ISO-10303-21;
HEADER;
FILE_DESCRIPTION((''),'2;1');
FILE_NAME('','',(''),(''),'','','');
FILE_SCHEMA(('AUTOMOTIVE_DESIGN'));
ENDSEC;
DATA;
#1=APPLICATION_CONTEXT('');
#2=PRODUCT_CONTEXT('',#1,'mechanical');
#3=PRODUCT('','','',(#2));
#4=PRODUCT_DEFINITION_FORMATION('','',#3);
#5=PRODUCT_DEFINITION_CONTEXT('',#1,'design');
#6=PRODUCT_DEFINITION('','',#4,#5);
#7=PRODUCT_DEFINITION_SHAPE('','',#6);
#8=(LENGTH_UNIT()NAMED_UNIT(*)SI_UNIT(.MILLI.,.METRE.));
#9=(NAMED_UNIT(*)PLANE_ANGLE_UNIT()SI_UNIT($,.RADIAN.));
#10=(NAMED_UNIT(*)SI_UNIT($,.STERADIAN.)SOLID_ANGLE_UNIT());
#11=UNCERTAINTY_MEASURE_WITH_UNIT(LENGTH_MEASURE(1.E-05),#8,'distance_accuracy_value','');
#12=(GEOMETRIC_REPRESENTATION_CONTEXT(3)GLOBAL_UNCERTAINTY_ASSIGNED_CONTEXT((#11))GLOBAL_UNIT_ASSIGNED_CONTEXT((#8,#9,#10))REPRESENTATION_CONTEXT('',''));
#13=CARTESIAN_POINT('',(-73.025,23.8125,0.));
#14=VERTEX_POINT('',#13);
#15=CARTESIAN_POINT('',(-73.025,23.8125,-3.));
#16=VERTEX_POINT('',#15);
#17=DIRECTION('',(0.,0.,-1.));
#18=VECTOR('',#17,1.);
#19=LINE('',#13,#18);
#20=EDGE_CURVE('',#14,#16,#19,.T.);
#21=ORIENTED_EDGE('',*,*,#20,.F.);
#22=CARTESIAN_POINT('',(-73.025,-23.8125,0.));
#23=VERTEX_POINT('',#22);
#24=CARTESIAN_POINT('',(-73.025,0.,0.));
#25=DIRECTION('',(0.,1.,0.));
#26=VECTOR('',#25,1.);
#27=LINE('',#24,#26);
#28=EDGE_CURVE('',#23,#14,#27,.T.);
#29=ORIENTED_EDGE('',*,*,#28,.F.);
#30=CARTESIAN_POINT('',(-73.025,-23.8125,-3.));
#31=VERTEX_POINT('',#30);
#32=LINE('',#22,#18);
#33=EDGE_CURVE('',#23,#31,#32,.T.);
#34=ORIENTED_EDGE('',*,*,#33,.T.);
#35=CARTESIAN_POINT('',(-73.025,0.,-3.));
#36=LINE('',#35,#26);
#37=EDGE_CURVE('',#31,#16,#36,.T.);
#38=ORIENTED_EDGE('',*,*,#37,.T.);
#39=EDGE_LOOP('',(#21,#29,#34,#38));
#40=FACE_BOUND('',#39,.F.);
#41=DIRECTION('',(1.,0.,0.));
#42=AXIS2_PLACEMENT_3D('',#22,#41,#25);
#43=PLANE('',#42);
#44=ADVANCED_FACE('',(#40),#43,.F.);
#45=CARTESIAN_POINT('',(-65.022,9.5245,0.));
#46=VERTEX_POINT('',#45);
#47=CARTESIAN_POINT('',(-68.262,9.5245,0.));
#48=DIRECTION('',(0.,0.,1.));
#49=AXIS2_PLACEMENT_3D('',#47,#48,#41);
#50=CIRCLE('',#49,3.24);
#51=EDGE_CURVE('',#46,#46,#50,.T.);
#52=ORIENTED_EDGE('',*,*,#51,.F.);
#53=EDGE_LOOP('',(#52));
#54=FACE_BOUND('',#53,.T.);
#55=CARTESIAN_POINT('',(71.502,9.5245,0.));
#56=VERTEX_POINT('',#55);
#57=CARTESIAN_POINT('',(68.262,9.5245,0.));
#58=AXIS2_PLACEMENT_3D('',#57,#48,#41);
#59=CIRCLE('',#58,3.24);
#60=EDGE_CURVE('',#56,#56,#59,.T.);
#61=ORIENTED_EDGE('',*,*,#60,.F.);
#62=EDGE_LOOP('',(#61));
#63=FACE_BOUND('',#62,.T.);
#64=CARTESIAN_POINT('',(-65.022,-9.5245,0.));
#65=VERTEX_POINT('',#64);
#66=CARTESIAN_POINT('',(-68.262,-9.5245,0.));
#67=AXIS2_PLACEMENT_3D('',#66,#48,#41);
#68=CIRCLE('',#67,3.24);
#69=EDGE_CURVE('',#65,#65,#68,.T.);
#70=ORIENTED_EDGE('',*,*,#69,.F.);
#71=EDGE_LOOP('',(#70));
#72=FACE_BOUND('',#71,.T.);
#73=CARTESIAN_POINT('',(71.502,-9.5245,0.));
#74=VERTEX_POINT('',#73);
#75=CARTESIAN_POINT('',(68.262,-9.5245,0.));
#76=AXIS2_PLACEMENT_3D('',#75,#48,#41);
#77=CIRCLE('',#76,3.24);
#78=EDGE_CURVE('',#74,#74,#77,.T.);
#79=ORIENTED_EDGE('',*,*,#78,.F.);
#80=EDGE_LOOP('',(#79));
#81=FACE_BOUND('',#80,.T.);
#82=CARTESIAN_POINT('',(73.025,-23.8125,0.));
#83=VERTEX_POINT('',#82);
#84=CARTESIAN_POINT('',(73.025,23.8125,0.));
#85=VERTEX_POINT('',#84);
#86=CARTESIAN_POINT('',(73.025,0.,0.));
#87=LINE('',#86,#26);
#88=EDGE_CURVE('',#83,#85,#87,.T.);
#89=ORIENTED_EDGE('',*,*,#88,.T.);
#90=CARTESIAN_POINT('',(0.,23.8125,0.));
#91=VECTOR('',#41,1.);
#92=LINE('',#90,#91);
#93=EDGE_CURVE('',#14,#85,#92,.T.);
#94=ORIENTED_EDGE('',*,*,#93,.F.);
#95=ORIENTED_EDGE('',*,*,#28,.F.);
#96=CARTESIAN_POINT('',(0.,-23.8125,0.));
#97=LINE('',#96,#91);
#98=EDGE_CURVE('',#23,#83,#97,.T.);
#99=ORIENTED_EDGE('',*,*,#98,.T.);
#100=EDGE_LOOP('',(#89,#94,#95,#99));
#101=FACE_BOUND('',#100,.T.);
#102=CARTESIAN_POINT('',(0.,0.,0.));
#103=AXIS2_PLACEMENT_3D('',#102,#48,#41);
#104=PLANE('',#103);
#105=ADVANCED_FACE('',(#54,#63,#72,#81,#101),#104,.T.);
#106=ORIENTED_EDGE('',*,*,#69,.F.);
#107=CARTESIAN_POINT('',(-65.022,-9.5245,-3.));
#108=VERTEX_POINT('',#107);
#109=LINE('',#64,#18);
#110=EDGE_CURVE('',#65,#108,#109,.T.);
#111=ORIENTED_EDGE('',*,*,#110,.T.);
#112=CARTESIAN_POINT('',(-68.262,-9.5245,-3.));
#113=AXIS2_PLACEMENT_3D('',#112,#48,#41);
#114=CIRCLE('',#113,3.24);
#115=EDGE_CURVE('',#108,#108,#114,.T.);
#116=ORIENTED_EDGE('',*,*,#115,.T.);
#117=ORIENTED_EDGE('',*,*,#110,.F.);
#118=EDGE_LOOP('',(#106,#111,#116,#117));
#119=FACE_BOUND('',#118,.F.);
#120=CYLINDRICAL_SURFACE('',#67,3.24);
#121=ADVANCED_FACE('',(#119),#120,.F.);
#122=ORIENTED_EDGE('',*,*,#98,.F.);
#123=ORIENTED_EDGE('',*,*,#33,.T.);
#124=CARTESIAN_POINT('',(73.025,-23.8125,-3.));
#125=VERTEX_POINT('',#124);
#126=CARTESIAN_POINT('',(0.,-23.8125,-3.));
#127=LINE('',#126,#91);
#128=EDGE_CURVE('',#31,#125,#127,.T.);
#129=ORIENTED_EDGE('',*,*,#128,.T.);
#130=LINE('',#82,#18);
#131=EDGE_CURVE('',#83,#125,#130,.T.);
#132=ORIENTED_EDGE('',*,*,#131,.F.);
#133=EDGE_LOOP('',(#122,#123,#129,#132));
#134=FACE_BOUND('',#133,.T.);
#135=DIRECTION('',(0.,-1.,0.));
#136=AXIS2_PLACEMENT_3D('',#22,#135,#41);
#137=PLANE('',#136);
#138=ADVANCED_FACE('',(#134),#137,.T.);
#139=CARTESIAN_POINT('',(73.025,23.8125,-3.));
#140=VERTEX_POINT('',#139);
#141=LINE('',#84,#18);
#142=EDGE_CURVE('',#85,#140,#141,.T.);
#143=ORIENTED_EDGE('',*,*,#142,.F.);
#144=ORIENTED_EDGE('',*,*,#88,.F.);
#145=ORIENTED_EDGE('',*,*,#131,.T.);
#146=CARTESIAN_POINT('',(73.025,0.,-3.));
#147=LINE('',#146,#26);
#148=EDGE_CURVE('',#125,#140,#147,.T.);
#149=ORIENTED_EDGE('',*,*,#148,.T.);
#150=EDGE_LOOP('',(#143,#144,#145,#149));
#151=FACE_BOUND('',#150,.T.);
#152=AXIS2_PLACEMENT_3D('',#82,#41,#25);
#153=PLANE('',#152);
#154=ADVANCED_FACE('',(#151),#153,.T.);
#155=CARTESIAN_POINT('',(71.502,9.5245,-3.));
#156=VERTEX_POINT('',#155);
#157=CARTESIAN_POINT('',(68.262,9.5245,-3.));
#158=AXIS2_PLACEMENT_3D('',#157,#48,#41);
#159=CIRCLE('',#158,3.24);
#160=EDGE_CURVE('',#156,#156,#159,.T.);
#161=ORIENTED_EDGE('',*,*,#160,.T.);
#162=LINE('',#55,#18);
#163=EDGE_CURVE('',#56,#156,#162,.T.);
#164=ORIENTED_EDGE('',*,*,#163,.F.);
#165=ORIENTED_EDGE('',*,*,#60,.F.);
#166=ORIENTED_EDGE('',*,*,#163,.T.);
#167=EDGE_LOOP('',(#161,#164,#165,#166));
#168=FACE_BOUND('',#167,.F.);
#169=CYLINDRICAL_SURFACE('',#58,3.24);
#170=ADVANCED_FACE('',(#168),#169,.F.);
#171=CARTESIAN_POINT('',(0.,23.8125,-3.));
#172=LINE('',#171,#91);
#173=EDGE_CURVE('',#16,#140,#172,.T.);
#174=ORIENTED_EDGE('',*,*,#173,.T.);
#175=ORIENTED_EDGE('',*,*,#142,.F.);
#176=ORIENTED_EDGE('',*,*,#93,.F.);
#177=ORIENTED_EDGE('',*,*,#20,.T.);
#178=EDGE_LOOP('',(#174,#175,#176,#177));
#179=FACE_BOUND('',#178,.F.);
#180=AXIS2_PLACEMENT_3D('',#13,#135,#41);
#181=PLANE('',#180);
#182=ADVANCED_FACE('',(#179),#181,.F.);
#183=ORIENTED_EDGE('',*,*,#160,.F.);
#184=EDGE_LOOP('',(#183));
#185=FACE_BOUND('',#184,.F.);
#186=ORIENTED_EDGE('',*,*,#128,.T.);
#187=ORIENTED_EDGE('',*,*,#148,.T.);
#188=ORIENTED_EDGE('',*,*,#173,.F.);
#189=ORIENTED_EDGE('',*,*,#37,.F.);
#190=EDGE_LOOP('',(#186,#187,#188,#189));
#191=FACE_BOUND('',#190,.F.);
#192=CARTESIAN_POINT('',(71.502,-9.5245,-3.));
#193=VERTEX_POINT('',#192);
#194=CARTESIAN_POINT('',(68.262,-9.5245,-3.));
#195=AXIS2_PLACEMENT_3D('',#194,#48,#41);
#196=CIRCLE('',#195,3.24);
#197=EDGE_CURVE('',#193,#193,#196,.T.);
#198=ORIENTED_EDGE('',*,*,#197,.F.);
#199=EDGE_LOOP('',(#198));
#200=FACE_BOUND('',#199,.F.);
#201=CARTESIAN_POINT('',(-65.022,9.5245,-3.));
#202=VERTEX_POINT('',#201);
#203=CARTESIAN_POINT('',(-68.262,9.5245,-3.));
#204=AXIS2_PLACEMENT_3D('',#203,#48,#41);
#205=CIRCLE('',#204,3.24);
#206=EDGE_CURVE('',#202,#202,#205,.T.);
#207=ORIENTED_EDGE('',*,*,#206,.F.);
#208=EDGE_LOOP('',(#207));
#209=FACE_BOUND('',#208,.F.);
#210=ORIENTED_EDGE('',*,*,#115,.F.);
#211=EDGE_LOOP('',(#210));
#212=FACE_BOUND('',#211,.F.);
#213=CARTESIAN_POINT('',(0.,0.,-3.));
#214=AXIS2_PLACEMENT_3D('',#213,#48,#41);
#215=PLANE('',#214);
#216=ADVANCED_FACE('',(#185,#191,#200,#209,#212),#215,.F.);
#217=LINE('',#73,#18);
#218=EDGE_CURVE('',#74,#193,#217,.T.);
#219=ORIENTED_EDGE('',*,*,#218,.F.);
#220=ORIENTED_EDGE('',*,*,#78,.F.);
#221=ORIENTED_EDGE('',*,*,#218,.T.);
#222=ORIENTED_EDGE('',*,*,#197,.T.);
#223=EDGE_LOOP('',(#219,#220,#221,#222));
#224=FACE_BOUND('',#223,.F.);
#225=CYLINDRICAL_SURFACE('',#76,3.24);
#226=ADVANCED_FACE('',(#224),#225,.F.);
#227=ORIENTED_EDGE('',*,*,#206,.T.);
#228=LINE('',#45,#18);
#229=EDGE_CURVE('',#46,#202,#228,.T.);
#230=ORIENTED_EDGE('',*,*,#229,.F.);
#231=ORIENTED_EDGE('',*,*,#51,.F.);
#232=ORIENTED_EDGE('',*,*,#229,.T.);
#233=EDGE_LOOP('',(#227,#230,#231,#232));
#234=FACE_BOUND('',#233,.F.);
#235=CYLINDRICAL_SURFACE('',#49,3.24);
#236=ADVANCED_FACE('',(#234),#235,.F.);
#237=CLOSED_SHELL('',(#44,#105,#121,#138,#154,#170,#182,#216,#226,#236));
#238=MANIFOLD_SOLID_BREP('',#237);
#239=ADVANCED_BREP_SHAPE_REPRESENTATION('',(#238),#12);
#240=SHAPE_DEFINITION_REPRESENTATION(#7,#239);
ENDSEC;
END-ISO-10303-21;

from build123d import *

# Parameters (mm, degrees)
F0_W     = 146.05
F0_H     = 47.625
F0_R     = 3.24
F1_DEPTH = 3


# Not quite as in the source:
# - ends of sketch curves that miss each other by under 0.0002 mm in the source are joined


with BuildPart() as f1:
    # F0 (on Top) → F1 (new body)
    with BuildSketch(Plane.XY):
        Rectangle(F0_W, F0_H)
        with Locations((-68.262, -9.5245)):
            Circle(F0_R, mode=Mode.SUBTRACT)
        with Locations((68.262, -9.5245)):
            Circle(F0_R, mode=Mode.SUBTRACT)
        with Locations((-68.262, 9.5245)):
            Circle(F0_R, mode=Mode.SUBTRACT)
        with BuildLine():
            Line((72.225, -15.859485), (72.225, -23.0125))
            Line((72.225, -23.0125), (-72.225, -23.0125))
            Line((-72.225, -23.0125), (-72.225, -15.874133))
            Line((-72.225, -15.874133), (-68.193705, -15.874133))
            ThreePointArc((-68.193705, -15.874133), (-61.912367271, -9.4562050029), (-68.3302949971, -3.174867271))
            Line((-68.3302949971, -3.174867271), (-72.225, -3.174867))
            Line((-72.225, -3.174867), (-72.225, 3.1745))
            Line((-72.225, 3.1745), (-68.262, 3.1745))
            ThreePointArc((-68.262, 3.1745), (-61.912, 9.5245), (-68.262, 15.8745))
            Line((-68.262, 15.8745), (-72.225, 15.8745))
            Line((-72.225, 15.8745), (-72.225, 23.0125))
            Line((-72.225, 23.0125), (72.225, 23.0125))
            Line((72.225, 23.0125), (72.225, 15.8745))
            Line((72.225, 15.8745), (68.262, 15.8745))
            ThreePointArc((68.262, 15.8745), (61.912, 9.5245), (68.262, 3.1745))
            Line((68.262, 3.1745), (72.225, 3.1745))
            Line((72.225, 3.1745), (72.225, -3.189515))
            Line((72.225, -3.189515), (67.825573, -3.189515))
            ThreePointArc((67.825573, -3.189515), (61.9270152731, -9.9609269812), (68.6984269812, -15.8594847269))
            Line((68.6984269812, -15.8594847269), (72.225, -15.859485))
        make_face(mode=Mode.SUBTRACT)
        with Locations((68.262, 9.5245)):
            Circle(F0_R, mode=Mode.SUBTRACT)
        with BuildLine():
            Line((-72.225, -23.0125), (72.225, -23.0125))
            Line((72.225, -23.0125), (72.225, -15.859485))
            Line((72.225, -15.859485), (68.698427, -15.859485))
            ThreePointArc((68.698427, -15.859485), (61.9270152731, -9.9609269812), (67.8255730188, -3.1895152731))
            Line((67.8255730188, -3.1895152731), (72.225, -3.189515))
            Line((72.225, -3.189515), (72.225, 3.1745))
            Line((72.225, 3.1745), (68.262, 3.1745))
            ThreePointArc((68.262, 3.1745), (61.912, 9.5245), (68.262, 15.8745))
            Line((68.262, 15.8745), (72.225, 15.8745))
            Line((72.225, 15.8745), (72.225, 23.0125))
            Line((72.225, 23.0125), (-72.225, 23.0125))
            Line((-72.225, 23.0125), (-72.225, 15.8745))
            Line((-72.225, 15.8745), (-68.262, 15.8745))
            ThreePointArc((-68.262, 15.8745), (-61.912, 9.5245), (-68.262, 3.1745))
            Line((-68.262, 3.1745), (-72.225, 3.1745))
            Line((-72.225, 3.1745), (-72.225, -3.174867))
            Line((-72.225, -3.174867), (-68.330295, -3.174867))
            ThreePointArc((-68.330295, -3.174867), (-61.912367271, -9.4562050029), (-68.1937050029, -15.874132729))
            Line((-68.1937050029, -15.874132729), (-72.225, -15.874133))
            Line((-72.225, -15.874133), (-72.225, -23.0125))
        make_face()
    extrude(amount=-F1_DEPTH)


solid = f1.part
